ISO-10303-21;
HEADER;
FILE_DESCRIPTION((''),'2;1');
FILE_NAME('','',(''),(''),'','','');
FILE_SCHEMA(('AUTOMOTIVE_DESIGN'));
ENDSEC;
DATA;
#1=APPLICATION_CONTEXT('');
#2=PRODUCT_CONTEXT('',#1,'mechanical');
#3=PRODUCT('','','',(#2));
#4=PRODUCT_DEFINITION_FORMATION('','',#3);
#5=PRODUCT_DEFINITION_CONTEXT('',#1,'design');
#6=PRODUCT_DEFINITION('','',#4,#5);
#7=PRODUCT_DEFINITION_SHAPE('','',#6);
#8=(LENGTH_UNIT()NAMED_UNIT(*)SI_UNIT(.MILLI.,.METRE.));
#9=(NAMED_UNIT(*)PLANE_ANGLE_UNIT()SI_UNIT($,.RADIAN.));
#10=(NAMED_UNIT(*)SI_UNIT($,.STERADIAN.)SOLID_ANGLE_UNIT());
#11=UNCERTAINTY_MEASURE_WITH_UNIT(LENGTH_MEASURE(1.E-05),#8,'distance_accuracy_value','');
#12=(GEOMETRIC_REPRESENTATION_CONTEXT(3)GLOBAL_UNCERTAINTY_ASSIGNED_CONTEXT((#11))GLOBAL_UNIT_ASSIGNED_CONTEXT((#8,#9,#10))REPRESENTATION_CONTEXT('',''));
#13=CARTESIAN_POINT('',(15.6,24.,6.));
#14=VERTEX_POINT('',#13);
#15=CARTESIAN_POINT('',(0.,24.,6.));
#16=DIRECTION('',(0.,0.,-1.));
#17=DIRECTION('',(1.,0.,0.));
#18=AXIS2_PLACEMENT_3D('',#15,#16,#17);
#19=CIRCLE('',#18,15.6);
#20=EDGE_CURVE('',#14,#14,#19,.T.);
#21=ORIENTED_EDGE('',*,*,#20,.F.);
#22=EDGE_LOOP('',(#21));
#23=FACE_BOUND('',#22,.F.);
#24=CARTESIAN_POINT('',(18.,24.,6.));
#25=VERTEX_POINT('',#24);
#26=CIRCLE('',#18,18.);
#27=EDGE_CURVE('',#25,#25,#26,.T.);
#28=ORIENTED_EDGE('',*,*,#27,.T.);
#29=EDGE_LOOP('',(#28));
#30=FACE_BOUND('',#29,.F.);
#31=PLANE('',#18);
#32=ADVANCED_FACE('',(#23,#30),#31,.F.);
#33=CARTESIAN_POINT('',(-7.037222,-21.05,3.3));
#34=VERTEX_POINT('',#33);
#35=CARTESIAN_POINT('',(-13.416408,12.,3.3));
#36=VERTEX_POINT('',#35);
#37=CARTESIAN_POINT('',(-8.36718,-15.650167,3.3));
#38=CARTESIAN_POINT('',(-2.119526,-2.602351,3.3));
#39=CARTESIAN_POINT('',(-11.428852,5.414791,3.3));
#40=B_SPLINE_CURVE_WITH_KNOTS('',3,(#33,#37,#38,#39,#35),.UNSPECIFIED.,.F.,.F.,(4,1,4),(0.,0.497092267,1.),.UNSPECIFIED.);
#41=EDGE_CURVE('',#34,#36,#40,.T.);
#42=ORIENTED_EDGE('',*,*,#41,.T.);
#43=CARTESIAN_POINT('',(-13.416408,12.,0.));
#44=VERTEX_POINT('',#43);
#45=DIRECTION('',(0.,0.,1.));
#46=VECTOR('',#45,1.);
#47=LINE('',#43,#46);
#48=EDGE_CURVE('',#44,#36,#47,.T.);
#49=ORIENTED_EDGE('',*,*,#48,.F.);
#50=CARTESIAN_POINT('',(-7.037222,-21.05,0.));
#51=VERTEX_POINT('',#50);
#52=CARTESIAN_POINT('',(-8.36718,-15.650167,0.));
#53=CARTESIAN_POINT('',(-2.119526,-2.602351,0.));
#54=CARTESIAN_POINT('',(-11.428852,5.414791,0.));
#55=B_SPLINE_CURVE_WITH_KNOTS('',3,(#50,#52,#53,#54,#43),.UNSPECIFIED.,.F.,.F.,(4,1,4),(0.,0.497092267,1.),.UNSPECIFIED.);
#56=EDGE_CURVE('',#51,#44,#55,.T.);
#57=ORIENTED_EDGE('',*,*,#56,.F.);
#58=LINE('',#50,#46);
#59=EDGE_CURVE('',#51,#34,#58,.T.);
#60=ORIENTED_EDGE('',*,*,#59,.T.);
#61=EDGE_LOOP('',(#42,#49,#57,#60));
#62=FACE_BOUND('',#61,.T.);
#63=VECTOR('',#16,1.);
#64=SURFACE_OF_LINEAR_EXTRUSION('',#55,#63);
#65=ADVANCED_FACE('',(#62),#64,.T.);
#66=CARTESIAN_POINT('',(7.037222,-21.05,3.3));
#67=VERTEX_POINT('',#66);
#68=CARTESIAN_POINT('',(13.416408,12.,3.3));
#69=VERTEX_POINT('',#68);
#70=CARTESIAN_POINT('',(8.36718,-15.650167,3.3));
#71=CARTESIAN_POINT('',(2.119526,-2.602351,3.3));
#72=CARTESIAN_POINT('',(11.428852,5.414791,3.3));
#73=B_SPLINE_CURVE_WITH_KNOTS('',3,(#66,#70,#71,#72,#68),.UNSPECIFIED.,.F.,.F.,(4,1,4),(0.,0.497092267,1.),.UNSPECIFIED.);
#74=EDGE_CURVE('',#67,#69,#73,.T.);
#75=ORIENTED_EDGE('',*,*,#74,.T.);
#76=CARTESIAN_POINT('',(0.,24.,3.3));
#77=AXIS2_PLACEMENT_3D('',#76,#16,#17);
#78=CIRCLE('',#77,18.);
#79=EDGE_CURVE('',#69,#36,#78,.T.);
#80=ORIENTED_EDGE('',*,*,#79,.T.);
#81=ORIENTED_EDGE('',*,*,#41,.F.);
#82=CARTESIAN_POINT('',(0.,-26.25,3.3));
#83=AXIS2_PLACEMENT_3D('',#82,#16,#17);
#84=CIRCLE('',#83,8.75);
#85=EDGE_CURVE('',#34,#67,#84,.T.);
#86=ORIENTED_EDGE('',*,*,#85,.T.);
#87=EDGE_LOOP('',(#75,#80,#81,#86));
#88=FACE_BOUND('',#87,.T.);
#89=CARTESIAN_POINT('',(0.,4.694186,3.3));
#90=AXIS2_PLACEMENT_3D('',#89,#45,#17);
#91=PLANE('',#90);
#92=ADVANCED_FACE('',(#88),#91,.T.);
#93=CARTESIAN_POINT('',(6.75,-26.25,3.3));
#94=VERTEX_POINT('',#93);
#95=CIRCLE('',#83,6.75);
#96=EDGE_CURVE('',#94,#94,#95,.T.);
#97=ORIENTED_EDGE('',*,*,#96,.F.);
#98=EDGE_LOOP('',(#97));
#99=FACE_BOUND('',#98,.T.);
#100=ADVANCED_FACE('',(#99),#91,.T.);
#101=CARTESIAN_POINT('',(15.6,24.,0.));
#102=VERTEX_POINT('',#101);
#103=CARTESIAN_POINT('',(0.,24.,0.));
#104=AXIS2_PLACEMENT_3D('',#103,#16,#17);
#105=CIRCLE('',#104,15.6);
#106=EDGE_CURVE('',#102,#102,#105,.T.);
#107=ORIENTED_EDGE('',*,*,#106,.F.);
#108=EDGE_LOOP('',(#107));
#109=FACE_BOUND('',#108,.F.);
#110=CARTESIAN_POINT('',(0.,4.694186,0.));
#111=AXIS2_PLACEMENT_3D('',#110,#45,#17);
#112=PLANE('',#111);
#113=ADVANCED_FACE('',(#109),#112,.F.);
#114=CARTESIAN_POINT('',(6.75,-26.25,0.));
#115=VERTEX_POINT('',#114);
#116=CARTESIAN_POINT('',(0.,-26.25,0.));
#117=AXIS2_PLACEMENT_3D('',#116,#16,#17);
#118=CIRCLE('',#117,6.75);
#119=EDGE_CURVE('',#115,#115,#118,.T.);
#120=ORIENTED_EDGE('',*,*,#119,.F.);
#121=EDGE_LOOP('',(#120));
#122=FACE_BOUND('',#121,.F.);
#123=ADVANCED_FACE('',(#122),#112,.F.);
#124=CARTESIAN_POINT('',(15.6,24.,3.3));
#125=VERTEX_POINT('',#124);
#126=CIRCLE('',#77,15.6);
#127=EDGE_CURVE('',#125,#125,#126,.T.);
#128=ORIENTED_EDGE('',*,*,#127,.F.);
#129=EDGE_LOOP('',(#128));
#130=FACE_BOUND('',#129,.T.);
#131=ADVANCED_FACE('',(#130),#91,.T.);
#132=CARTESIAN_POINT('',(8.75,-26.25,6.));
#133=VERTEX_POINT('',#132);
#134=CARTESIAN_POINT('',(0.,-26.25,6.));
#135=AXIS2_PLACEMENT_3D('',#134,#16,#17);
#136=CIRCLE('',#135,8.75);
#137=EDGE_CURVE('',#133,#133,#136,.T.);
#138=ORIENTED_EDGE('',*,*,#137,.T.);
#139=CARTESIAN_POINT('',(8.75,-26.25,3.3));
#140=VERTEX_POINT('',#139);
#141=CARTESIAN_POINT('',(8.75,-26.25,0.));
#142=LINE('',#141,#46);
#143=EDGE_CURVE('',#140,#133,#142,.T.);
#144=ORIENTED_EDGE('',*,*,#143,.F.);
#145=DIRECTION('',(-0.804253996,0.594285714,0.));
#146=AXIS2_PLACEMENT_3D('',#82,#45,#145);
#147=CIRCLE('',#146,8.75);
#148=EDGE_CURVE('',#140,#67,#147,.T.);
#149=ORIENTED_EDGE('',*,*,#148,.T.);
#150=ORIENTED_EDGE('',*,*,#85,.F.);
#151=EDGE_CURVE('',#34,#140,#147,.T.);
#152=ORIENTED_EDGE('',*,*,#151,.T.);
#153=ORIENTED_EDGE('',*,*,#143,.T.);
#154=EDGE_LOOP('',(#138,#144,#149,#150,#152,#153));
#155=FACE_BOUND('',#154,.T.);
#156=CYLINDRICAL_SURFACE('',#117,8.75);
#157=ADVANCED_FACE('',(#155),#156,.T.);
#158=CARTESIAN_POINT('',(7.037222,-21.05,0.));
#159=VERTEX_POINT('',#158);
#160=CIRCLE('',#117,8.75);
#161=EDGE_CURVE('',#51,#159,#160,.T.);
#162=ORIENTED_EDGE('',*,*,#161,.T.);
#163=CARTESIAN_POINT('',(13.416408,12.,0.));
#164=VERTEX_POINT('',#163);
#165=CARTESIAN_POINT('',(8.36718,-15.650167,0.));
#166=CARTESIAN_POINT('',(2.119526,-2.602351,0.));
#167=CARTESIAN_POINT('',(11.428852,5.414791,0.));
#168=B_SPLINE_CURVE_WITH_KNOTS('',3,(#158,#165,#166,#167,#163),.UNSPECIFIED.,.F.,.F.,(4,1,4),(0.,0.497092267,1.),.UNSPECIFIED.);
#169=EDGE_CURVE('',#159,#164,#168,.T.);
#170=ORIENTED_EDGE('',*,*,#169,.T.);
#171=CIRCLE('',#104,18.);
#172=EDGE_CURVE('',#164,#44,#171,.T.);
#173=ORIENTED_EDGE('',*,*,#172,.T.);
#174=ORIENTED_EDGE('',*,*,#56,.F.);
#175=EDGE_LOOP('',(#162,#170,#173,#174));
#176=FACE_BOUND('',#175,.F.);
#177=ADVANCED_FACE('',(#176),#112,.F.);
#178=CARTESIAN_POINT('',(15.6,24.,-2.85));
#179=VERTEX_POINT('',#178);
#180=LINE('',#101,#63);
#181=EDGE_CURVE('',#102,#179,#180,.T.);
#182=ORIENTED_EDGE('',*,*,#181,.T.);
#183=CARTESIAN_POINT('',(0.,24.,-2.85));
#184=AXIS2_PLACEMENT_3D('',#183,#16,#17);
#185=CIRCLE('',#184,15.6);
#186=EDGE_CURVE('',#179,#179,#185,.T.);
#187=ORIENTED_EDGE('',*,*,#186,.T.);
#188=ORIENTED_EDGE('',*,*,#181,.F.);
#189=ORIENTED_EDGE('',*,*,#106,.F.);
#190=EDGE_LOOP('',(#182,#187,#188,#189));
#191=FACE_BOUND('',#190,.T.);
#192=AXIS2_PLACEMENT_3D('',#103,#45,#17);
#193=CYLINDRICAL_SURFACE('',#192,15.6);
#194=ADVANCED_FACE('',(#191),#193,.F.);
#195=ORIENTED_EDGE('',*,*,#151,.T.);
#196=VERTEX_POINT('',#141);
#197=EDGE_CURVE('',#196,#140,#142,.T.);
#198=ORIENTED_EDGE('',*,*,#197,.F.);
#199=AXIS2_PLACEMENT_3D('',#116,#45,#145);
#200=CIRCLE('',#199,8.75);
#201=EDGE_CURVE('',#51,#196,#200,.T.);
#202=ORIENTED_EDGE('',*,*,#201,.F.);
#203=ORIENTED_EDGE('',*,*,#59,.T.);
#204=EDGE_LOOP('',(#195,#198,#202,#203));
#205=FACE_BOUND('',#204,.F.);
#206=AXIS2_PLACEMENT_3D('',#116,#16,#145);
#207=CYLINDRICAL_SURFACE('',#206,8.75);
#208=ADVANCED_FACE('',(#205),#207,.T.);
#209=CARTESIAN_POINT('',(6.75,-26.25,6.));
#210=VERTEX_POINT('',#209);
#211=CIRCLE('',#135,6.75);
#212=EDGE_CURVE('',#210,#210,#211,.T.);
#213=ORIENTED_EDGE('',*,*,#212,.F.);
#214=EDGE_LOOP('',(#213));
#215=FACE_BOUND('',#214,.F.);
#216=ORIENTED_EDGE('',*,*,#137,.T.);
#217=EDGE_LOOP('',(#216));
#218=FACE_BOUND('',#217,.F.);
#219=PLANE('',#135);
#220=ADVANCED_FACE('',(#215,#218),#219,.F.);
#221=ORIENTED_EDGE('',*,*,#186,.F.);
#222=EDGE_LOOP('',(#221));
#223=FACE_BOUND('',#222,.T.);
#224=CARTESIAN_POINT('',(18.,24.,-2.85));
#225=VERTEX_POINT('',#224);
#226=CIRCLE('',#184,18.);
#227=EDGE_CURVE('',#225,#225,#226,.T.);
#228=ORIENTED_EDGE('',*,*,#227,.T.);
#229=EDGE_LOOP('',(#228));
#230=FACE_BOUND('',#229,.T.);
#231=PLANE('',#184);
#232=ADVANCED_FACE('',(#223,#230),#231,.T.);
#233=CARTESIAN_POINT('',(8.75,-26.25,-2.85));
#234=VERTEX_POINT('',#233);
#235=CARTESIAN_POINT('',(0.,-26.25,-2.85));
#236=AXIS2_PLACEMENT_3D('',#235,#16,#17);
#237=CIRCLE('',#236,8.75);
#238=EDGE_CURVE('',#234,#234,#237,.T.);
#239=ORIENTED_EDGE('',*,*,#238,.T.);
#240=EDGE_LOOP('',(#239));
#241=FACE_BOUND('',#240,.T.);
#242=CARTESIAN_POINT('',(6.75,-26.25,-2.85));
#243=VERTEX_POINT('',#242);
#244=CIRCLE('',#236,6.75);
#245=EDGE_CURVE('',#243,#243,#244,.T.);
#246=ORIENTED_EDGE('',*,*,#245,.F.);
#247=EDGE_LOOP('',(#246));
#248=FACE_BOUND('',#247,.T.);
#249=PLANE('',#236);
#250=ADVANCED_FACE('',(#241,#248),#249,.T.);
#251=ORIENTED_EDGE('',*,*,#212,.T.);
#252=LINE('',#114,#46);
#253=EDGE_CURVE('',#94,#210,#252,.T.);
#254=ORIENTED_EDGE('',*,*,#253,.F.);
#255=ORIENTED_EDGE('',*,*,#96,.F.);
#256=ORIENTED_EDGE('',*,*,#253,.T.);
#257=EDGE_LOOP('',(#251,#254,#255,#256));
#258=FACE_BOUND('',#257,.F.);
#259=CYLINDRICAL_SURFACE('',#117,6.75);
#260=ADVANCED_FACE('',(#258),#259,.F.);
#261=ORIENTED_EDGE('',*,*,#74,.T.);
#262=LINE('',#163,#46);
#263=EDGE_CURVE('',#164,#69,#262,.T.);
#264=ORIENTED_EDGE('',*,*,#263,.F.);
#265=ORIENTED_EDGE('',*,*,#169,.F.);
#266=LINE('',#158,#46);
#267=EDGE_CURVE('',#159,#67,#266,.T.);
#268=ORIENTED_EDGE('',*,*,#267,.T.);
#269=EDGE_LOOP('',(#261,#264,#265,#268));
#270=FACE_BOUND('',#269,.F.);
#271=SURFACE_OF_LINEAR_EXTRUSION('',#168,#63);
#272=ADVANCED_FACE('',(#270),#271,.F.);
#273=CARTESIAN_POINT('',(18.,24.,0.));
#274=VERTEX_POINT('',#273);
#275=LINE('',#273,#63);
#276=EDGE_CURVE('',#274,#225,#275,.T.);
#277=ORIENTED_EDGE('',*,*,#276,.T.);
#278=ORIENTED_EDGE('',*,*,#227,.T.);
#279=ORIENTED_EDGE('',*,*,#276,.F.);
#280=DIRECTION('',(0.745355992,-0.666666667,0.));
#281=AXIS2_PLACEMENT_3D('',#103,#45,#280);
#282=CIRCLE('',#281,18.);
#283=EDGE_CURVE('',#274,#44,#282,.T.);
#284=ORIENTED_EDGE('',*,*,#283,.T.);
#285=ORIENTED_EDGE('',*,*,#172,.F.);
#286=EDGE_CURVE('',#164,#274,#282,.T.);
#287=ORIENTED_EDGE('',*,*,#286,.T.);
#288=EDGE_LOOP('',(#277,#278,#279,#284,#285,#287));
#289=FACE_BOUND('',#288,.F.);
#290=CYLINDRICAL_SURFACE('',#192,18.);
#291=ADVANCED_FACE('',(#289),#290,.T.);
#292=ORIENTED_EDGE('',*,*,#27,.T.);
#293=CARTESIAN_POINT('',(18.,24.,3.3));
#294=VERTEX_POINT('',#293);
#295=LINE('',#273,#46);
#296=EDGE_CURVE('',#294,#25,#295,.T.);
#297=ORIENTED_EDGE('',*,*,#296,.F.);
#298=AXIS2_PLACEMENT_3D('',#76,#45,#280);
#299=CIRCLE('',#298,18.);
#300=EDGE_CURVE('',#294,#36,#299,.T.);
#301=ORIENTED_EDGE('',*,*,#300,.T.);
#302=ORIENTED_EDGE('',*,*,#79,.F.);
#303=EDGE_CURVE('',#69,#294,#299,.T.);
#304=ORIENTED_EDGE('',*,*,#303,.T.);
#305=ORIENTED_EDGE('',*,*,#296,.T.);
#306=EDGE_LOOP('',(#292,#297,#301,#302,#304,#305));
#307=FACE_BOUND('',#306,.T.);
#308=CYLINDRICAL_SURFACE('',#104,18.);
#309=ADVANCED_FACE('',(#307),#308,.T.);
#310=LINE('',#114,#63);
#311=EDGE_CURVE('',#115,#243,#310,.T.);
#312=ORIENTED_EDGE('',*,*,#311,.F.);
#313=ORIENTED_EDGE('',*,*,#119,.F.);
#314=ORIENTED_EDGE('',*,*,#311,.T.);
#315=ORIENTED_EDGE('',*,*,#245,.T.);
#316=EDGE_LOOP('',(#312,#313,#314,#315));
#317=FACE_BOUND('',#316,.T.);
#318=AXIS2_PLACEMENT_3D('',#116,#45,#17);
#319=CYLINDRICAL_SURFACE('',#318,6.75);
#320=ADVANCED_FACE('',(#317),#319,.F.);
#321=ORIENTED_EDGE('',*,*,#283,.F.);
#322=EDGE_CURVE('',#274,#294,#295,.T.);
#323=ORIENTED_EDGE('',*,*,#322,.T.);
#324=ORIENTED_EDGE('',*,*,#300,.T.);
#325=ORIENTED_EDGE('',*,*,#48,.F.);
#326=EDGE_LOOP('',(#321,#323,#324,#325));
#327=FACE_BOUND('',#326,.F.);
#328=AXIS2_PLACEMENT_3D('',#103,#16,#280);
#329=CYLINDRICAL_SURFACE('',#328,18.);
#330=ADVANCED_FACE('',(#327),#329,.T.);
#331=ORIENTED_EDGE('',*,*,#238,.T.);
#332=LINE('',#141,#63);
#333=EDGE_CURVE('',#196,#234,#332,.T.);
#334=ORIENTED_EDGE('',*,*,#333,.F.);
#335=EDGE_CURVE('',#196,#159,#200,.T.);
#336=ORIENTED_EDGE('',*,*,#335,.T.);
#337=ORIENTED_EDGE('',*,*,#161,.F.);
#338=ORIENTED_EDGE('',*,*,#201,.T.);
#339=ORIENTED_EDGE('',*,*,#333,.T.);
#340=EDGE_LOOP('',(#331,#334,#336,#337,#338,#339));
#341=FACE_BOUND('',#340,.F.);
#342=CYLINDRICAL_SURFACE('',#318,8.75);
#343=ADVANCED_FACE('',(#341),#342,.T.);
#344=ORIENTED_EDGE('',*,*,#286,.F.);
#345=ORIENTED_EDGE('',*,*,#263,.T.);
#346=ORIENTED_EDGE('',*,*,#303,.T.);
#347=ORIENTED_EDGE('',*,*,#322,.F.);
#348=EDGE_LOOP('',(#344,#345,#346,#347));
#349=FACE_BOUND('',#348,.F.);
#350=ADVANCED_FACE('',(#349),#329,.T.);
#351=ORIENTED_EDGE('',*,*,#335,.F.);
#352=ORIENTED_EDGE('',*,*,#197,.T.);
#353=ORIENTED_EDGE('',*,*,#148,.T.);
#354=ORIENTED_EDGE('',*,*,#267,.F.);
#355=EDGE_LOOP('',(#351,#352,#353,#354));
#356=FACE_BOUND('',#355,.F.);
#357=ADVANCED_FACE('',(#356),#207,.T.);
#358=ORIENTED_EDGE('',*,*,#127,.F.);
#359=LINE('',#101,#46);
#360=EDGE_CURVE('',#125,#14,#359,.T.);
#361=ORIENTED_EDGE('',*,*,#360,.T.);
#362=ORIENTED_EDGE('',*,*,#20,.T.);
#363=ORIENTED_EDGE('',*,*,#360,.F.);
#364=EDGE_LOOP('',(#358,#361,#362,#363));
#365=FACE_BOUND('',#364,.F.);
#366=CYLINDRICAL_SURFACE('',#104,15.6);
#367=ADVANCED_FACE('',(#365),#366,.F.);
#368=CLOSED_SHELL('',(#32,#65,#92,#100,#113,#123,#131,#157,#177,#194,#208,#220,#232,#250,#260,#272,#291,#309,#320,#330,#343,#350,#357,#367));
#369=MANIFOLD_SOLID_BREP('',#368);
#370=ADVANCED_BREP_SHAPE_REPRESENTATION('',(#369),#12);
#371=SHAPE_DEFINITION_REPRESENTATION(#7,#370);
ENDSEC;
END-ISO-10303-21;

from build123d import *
from build123d import SkipClean  # not in build123d's __all__

# Parameters (mm, degrees)
F1_DEPTH      = 3.3
F2_R          = 18
F2_R_2        = 15.6
F2_R_3        = 8.75
F2_R_4        = 6.75
F3_DEPTH      = 2.85
F3_DEPTH_BACK = 6


with BuildPart() as f1:
    # F0 (on Top) → F1 (new body)
    with BuildSketch(Plane.XY):
        with BuildLine():
            add(Edge.make_bspline(
                [(7.0372224634, -21.05), (8.3671803407, -15.6501668156), (2.1195257428, -2.6023508459), (11.4288521337, 5.4147908541), (13.416407865, 12)],
                knots=[0, 0, 0, 0, 0.4970922674, 1, 1, 1, 1], degree=3))
            ThreePointArc((13.416407865, 12), (0, 42), (-13.416407865, 12))
            add(Edge.make_bspline(
                [(-7.0372224634, -21.05), (-8.3671803407, -15.6501668156), (-2.1195257428, -2.6023508459), (-11.4288521337, 5.4147908541), (-13.416407865, 12)],
                knots=[0, 0, 0, 0, 0.4970922674, 1, 1, 1, 1], degree=3))
            ThreePointArc((-7.0372224634, -21.05), (0, -35), (7.0372224634, -21.05))
        make_face()
    extrude(amount=F1_DEPTH)

    # F2 (on face) → F3 (join, two sides)
    with BuildSketch(Plane(origin=(0, 0, 0), x_dir=(1, 0, 0), z_dir=(0, 0, -1))) as f3_sk:
        with Locations((0, -24)):
            Circle(F2_R)
        with Locations((0, -24)):
            Circle(F2_R_2, mode=Mode.SUBTRACT)
        with Locations((0, 26.25)):
            Circle(F2_R_3)
        with Locations((0, 26.25)):
            Circle(F2_R_4, mode=Mode.SUBTRACT)
    with SkipClean():  # cleaning this boolean's faces spoils the solid; the shape is the same uncleaned
        extrude(amount=F3_DEPTH)
        extrude(f3_sk.sketch, amount=-F3_DEPTH_BACK)


solid = f1.part
